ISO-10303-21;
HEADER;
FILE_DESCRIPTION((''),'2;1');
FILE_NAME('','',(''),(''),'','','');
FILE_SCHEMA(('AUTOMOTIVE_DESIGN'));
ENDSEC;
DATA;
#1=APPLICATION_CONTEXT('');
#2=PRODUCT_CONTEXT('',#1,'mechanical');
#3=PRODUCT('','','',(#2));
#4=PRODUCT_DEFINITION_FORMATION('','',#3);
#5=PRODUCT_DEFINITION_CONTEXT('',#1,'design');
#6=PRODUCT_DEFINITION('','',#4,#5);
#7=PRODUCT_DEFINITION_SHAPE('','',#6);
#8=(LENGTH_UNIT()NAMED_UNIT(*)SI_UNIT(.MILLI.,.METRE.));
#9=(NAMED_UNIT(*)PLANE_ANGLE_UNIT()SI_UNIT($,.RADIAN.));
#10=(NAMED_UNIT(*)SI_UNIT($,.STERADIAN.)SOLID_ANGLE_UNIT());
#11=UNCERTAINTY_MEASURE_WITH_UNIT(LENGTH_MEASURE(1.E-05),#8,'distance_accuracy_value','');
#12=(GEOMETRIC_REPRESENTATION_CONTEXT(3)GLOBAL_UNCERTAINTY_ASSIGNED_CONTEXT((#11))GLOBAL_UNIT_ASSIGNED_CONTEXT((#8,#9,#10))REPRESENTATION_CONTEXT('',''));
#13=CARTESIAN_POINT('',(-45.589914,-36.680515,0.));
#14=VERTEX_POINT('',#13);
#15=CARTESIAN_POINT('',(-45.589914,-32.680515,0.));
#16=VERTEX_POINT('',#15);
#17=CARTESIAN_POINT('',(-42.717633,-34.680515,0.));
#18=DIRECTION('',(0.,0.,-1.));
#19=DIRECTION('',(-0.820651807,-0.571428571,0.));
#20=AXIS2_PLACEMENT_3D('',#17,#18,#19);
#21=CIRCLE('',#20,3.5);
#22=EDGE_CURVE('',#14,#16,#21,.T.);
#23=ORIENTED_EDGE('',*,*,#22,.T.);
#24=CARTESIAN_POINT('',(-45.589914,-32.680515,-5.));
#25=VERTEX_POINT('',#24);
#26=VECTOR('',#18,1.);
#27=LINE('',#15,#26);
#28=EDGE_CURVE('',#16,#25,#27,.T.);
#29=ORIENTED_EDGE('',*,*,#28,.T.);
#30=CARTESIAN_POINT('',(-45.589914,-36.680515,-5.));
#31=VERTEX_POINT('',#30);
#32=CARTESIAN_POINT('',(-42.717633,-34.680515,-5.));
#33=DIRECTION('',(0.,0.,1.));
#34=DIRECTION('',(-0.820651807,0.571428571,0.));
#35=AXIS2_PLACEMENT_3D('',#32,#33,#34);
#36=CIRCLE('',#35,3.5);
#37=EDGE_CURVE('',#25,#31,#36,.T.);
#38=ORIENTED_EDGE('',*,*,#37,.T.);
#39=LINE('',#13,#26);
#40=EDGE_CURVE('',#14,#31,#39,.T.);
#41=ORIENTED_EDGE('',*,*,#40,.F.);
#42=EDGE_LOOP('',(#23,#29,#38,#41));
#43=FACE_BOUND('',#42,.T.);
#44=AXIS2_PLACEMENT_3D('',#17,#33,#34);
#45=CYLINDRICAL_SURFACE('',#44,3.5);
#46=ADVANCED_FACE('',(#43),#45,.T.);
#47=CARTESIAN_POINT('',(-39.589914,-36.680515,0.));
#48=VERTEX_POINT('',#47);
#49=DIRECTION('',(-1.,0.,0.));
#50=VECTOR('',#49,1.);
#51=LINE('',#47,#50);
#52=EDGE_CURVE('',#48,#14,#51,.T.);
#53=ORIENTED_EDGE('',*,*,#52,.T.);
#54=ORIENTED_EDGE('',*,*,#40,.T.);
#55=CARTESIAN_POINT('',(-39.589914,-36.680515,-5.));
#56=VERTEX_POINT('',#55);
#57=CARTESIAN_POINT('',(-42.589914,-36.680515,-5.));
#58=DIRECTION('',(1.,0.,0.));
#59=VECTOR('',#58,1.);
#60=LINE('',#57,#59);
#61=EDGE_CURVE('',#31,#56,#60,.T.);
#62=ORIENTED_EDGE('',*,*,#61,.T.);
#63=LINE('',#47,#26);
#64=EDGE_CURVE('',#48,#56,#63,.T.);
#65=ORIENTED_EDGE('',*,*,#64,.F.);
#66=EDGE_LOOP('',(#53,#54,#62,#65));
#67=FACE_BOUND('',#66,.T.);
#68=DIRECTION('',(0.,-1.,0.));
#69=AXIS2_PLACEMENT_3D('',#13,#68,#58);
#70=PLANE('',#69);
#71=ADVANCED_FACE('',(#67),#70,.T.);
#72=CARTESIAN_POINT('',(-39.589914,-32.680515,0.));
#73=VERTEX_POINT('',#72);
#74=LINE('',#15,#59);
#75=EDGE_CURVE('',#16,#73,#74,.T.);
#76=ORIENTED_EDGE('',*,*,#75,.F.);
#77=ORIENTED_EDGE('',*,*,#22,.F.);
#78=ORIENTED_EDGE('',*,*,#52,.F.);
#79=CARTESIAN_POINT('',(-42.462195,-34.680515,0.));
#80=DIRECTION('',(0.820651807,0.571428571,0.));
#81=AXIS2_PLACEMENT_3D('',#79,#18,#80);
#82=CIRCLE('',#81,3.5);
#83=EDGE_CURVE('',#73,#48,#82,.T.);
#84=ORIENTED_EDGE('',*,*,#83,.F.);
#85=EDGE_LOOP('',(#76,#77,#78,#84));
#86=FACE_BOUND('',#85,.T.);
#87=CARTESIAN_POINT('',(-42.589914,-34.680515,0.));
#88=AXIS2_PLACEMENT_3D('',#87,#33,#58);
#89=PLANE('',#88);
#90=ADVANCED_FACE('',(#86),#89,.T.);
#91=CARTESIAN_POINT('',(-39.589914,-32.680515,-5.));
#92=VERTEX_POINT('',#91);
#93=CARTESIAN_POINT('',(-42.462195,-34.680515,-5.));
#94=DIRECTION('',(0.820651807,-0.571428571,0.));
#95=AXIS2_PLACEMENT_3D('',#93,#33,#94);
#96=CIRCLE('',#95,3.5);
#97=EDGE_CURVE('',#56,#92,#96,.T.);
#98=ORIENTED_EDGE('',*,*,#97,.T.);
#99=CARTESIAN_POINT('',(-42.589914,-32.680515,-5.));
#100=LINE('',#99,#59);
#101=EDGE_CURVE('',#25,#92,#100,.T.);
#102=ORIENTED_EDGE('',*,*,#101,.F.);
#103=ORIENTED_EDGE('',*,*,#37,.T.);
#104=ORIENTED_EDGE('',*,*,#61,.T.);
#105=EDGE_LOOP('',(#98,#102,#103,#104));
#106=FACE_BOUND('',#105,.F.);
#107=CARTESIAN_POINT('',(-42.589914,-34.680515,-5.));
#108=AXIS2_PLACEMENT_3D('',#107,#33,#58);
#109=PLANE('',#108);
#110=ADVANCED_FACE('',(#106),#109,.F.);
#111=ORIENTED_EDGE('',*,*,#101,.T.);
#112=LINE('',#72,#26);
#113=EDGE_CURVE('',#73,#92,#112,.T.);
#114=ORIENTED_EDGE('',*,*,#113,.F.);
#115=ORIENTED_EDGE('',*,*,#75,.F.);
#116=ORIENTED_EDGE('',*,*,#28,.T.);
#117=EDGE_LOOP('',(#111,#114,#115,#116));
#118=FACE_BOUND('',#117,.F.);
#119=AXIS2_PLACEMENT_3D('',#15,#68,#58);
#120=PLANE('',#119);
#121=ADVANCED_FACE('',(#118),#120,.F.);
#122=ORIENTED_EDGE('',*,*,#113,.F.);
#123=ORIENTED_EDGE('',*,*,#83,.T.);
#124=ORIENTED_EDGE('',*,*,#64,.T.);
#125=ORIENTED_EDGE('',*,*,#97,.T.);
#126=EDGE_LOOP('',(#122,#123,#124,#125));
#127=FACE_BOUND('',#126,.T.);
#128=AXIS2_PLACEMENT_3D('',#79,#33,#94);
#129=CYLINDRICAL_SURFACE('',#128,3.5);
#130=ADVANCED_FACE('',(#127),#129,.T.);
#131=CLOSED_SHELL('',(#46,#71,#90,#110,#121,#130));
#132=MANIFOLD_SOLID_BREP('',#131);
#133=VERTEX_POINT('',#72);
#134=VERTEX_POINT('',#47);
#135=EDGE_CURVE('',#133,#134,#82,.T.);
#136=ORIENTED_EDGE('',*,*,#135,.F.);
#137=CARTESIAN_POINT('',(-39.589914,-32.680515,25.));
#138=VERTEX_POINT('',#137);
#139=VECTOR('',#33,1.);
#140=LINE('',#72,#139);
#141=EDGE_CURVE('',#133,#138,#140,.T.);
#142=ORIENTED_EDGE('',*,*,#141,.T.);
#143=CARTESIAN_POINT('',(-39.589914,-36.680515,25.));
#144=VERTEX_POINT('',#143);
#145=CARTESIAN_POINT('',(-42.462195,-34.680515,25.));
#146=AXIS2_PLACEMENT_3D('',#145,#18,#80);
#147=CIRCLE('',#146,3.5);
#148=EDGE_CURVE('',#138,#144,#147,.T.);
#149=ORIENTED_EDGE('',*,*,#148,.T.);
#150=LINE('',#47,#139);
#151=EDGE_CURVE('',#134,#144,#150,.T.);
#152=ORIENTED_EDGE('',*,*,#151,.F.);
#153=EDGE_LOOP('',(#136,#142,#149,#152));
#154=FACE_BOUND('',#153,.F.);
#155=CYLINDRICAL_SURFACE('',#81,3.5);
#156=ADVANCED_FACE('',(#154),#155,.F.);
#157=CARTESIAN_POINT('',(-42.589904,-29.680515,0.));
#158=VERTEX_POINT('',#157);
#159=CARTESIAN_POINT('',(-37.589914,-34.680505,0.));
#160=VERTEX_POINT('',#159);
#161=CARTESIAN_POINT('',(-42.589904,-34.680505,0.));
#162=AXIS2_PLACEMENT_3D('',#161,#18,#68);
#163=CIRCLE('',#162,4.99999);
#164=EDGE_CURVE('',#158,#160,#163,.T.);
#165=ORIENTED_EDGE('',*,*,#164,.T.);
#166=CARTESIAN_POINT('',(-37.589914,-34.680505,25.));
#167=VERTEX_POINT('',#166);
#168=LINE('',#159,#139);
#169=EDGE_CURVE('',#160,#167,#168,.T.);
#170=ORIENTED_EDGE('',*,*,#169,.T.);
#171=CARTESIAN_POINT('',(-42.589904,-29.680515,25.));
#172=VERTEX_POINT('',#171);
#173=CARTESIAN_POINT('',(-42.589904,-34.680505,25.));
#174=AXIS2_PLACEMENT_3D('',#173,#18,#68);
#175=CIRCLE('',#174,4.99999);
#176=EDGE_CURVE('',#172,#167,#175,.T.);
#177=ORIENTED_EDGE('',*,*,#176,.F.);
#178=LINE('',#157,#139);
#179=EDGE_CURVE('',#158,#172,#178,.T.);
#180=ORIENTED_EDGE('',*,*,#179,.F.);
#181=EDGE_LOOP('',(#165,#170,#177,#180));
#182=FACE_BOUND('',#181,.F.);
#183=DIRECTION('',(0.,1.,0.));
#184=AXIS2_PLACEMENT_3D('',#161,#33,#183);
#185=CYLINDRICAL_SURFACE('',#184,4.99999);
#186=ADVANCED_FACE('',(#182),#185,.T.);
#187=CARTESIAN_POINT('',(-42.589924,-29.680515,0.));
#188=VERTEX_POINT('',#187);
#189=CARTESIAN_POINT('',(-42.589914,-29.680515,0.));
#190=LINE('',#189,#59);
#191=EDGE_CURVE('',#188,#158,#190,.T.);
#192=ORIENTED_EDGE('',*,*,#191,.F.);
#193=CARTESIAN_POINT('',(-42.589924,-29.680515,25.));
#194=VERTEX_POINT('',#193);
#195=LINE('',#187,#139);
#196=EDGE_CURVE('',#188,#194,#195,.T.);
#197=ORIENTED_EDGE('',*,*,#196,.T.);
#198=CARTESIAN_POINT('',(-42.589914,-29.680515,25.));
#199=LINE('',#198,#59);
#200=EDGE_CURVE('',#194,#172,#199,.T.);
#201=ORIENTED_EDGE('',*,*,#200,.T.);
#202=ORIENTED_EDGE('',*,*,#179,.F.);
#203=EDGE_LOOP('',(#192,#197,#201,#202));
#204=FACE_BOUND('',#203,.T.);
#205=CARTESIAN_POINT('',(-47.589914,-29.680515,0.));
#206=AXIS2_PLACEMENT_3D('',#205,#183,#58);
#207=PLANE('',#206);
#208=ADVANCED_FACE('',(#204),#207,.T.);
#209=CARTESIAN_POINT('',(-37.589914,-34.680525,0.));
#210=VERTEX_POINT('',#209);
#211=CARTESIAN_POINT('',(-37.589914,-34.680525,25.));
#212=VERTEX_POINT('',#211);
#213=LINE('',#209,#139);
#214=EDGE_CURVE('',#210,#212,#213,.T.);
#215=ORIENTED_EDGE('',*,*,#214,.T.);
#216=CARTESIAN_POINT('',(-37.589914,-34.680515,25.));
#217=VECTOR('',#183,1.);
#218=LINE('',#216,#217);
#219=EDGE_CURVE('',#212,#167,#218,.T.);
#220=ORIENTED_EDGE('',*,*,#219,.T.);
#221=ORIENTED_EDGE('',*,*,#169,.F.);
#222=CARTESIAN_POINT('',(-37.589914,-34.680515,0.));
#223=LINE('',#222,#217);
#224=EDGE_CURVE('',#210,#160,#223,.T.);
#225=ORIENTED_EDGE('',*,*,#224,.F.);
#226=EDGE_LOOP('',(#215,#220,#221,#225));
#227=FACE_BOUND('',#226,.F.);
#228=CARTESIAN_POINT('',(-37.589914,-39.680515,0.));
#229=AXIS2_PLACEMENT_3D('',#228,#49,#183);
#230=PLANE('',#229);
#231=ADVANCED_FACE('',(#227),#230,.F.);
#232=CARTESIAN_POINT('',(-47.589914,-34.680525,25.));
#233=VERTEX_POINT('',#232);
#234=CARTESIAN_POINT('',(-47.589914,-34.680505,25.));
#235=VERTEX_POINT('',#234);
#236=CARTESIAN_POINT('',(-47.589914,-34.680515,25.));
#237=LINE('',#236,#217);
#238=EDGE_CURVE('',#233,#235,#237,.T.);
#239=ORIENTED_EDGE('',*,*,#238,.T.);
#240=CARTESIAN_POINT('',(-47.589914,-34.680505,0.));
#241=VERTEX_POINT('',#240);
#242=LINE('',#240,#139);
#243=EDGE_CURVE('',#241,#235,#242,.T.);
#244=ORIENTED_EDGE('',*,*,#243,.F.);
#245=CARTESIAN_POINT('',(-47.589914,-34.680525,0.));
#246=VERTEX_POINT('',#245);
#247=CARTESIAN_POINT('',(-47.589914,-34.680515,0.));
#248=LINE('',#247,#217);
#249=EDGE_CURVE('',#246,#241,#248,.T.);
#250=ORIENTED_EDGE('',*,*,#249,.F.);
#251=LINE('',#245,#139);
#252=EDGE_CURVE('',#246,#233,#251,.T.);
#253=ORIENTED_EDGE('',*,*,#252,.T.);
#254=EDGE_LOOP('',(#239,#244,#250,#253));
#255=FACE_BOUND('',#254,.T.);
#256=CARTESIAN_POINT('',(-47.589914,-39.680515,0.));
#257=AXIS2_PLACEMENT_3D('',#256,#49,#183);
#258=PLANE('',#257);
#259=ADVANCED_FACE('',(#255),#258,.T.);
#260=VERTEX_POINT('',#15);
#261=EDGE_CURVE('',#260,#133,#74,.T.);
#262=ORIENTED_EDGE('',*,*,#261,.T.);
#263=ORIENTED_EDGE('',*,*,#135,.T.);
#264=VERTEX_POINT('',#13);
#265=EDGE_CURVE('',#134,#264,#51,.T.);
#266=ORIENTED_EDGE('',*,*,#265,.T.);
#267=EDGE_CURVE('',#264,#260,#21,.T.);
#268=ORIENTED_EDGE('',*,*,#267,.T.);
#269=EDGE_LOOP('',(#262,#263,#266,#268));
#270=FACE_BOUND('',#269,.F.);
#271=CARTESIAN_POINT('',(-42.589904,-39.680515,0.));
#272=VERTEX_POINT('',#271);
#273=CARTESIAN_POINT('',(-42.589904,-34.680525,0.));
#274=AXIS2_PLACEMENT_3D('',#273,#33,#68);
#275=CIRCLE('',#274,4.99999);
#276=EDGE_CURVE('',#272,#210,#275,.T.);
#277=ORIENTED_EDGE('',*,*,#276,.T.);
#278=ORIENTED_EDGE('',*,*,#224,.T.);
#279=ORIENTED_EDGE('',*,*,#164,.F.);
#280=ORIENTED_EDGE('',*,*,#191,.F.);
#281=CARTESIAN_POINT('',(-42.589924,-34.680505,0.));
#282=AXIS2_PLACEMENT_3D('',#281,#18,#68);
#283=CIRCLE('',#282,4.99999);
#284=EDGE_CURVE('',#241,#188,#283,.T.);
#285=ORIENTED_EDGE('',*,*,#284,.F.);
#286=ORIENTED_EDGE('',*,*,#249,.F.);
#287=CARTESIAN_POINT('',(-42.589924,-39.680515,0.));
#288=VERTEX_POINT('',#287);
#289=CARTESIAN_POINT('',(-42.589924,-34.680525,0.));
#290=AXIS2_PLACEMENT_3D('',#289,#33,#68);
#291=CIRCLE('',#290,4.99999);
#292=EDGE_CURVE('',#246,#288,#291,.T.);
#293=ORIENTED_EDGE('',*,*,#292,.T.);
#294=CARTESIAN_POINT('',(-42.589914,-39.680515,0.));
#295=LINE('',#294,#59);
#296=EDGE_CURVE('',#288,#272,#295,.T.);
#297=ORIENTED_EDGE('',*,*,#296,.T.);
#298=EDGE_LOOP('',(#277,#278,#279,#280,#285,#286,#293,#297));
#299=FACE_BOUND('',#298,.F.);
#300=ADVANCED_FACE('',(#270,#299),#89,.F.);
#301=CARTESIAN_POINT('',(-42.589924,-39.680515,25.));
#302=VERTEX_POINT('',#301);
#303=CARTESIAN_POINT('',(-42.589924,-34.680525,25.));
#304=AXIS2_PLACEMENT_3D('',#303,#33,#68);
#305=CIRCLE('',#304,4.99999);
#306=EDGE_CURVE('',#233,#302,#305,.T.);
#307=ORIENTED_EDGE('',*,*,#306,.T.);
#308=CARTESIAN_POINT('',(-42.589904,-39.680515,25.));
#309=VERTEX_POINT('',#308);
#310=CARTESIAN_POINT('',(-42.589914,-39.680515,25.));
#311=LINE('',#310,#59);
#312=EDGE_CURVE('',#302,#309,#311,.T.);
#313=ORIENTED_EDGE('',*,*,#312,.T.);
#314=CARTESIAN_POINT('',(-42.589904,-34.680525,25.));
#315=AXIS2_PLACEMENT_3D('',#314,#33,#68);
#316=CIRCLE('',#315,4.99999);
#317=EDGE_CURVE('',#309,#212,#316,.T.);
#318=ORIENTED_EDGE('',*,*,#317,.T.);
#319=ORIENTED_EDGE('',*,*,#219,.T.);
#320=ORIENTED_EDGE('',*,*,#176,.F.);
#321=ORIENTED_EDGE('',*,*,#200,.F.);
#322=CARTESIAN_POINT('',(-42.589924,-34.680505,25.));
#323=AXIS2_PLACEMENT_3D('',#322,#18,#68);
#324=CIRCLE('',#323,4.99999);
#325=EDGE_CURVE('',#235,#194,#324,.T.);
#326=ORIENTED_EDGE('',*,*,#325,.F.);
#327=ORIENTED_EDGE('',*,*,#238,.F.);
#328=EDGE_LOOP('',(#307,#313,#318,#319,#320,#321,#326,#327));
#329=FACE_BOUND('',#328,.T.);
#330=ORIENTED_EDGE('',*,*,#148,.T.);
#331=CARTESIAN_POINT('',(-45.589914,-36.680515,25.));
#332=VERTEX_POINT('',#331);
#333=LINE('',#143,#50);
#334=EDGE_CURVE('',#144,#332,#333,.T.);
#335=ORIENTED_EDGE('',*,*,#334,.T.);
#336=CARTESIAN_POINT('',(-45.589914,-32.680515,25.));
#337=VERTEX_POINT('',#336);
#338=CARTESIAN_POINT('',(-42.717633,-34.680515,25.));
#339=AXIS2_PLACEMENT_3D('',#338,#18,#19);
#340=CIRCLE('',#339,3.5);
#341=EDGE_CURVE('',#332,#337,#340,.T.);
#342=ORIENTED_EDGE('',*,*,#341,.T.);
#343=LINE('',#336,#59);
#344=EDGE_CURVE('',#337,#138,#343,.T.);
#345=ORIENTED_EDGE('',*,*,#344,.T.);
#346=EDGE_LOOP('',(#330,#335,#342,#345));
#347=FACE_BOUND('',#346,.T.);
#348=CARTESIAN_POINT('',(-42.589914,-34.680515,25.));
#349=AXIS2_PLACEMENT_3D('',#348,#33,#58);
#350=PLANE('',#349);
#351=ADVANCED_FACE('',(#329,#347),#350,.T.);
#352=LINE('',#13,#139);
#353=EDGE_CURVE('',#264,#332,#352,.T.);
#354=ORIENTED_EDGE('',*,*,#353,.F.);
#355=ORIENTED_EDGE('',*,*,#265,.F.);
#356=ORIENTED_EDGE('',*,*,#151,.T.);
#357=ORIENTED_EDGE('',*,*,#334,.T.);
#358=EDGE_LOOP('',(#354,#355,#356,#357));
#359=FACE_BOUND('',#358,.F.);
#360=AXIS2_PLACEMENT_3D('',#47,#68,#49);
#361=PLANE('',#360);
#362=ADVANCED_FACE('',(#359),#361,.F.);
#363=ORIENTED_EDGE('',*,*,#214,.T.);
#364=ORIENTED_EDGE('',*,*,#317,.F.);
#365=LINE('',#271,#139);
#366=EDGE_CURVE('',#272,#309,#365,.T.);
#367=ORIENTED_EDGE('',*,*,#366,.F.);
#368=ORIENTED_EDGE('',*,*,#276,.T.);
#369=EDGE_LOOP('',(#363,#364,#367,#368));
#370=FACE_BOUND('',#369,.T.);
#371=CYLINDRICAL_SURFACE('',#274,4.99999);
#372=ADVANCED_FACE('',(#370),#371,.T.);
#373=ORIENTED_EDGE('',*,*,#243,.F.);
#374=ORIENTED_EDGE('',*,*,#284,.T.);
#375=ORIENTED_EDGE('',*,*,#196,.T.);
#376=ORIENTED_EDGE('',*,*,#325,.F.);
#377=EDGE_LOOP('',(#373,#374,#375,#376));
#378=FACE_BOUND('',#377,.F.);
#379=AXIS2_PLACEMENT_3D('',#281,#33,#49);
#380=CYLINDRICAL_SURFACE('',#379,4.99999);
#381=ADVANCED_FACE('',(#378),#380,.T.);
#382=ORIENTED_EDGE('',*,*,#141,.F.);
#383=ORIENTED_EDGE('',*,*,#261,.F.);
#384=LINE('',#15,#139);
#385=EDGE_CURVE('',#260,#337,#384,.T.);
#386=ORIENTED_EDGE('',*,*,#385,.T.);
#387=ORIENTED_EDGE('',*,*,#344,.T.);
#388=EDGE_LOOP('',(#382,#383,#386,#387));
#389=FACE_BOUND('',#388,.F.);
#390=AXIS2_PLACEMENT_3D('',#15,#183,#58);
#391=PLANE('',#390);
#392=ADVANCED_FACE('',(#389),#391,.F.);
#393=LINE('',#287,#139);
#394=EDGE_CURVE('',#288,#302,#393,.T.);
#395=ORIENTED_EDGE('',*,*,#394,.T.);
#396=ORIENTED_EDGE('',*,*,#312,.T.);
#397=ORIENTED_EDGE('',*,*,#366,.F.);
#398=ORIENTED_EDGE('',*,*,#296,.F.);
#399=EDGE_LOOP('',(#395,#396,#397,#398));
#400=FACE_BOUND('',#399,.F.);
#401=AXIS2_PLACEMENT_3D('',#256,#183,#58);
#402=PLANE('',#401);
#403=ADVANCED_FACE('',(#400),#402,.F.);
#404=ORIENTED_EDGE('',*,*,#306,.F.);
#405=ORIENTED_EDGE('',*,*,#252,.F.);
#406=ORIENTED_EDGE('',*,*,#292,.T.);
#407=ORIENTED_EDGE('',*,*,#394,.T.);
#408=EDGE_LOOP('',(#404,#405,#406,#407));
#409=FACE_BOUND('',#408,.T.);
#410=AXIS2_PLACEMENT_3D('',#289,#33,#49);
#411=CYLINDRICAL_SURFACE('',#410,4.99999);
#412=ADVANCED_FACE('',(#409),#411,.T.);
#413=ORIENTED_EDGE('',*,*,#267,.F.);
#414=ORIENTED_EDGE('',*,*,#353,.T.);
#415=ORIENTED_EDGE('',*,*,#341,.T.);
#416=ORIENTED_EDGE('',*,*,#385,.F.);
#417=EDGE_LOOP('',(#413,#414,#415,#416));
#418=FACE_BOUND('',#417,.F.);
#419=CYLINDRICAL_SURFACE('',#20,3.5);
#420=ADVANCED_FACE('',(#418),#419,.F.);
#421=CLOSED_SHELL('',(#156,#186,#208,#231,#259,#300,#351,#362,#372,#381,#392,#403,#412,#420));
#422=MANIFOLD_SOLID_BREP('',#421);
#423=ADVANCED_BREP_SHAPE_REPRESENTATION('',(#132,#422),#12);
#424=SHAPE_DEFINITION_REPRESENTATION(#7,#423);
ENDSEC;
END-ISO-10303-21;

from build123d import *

# Parameters (mm, degrees)
F0_W     = 10
F0_H     = 10
F1_DEPTH = 25
F2_R     = 4.99999
F0_W_2   = 6
F0_H_2   = 4
F3_DEPTH = 5


# Not quite as in the source:
# - a fillet or chamfer is up to 0.001 mm smaller than in the source, because OpenCascade refuses the exact size


with BuildPart() as f1:
    # F0 (on Top) → F1 (new body)
    with BuildSketch(Plane.XY):
        with Locations((-42.5899140537, -34.680514973)):
            Rectangle(F0_W, F0_H)
        with BuildLine():
            ThreePointArc((-45.5899140537, -36.680514973), (-46.2176327304, -34.680514973), (-45.5899140537, -32.680514973))
            Line((-45.5899140537, -32.680514973), (-39.5899140537, -32.680514973))
            ThreePointArc((-39.5899140537, -32.680514973), (-38.9621953769, -34.680514973), (-39.5899140537, -36.680514973))
            Line((-39.5899140537, -36.680514973), (-45.5899140537, -36.680514973))
        make_face(mode=Mode.SUBTRACT)
    extrude(amount=F1_DEPTH)

    # F2 (radius 5 in the source; OpenCascade refuses exactly that, so slightly less here)
    f2_edges = [f1.edges().sort_by_distance(p)[0] for p in [
        (-37.589914, -39.680515, 12.5),
        (-37.589914, -29.680515, 12.5),
        (-47.589914, -39.680515, 12.5),
        (-47.589914, -29.680515, 12.5),
    ]]
    fillet(f2_edges, radius=F2_R)

    # F0 (on Top) → F3 (join)
    with BuildSketch(Plane.XY):
        with Locations((-42.5899140537, -34.680514973)):
            Rectangle(F0_W_2, F0_H_2)
        with BuildLine():
            Line((-45.5899140537, -36.680514973), (-45.5899140537, -32.680514973))
            ThreePointArc((-45.5899140537, -32.680514973), (-46.2176327304, -34.680514973), (-45.5899140537, -36.680514973))
        make_face()
        with BuildLine():
            ThreePointArc((-39.5899140537, -36.680514973), (-38.9621953769, -34.680514973), (-39.5899140537, -32.680514973))
            Line((-39.5899140537, -32.680514973), (-39.5899140537, -36.680514973))
        make_face()
    extrude(amount=-F3_DEPTH)


solid = f1.part
